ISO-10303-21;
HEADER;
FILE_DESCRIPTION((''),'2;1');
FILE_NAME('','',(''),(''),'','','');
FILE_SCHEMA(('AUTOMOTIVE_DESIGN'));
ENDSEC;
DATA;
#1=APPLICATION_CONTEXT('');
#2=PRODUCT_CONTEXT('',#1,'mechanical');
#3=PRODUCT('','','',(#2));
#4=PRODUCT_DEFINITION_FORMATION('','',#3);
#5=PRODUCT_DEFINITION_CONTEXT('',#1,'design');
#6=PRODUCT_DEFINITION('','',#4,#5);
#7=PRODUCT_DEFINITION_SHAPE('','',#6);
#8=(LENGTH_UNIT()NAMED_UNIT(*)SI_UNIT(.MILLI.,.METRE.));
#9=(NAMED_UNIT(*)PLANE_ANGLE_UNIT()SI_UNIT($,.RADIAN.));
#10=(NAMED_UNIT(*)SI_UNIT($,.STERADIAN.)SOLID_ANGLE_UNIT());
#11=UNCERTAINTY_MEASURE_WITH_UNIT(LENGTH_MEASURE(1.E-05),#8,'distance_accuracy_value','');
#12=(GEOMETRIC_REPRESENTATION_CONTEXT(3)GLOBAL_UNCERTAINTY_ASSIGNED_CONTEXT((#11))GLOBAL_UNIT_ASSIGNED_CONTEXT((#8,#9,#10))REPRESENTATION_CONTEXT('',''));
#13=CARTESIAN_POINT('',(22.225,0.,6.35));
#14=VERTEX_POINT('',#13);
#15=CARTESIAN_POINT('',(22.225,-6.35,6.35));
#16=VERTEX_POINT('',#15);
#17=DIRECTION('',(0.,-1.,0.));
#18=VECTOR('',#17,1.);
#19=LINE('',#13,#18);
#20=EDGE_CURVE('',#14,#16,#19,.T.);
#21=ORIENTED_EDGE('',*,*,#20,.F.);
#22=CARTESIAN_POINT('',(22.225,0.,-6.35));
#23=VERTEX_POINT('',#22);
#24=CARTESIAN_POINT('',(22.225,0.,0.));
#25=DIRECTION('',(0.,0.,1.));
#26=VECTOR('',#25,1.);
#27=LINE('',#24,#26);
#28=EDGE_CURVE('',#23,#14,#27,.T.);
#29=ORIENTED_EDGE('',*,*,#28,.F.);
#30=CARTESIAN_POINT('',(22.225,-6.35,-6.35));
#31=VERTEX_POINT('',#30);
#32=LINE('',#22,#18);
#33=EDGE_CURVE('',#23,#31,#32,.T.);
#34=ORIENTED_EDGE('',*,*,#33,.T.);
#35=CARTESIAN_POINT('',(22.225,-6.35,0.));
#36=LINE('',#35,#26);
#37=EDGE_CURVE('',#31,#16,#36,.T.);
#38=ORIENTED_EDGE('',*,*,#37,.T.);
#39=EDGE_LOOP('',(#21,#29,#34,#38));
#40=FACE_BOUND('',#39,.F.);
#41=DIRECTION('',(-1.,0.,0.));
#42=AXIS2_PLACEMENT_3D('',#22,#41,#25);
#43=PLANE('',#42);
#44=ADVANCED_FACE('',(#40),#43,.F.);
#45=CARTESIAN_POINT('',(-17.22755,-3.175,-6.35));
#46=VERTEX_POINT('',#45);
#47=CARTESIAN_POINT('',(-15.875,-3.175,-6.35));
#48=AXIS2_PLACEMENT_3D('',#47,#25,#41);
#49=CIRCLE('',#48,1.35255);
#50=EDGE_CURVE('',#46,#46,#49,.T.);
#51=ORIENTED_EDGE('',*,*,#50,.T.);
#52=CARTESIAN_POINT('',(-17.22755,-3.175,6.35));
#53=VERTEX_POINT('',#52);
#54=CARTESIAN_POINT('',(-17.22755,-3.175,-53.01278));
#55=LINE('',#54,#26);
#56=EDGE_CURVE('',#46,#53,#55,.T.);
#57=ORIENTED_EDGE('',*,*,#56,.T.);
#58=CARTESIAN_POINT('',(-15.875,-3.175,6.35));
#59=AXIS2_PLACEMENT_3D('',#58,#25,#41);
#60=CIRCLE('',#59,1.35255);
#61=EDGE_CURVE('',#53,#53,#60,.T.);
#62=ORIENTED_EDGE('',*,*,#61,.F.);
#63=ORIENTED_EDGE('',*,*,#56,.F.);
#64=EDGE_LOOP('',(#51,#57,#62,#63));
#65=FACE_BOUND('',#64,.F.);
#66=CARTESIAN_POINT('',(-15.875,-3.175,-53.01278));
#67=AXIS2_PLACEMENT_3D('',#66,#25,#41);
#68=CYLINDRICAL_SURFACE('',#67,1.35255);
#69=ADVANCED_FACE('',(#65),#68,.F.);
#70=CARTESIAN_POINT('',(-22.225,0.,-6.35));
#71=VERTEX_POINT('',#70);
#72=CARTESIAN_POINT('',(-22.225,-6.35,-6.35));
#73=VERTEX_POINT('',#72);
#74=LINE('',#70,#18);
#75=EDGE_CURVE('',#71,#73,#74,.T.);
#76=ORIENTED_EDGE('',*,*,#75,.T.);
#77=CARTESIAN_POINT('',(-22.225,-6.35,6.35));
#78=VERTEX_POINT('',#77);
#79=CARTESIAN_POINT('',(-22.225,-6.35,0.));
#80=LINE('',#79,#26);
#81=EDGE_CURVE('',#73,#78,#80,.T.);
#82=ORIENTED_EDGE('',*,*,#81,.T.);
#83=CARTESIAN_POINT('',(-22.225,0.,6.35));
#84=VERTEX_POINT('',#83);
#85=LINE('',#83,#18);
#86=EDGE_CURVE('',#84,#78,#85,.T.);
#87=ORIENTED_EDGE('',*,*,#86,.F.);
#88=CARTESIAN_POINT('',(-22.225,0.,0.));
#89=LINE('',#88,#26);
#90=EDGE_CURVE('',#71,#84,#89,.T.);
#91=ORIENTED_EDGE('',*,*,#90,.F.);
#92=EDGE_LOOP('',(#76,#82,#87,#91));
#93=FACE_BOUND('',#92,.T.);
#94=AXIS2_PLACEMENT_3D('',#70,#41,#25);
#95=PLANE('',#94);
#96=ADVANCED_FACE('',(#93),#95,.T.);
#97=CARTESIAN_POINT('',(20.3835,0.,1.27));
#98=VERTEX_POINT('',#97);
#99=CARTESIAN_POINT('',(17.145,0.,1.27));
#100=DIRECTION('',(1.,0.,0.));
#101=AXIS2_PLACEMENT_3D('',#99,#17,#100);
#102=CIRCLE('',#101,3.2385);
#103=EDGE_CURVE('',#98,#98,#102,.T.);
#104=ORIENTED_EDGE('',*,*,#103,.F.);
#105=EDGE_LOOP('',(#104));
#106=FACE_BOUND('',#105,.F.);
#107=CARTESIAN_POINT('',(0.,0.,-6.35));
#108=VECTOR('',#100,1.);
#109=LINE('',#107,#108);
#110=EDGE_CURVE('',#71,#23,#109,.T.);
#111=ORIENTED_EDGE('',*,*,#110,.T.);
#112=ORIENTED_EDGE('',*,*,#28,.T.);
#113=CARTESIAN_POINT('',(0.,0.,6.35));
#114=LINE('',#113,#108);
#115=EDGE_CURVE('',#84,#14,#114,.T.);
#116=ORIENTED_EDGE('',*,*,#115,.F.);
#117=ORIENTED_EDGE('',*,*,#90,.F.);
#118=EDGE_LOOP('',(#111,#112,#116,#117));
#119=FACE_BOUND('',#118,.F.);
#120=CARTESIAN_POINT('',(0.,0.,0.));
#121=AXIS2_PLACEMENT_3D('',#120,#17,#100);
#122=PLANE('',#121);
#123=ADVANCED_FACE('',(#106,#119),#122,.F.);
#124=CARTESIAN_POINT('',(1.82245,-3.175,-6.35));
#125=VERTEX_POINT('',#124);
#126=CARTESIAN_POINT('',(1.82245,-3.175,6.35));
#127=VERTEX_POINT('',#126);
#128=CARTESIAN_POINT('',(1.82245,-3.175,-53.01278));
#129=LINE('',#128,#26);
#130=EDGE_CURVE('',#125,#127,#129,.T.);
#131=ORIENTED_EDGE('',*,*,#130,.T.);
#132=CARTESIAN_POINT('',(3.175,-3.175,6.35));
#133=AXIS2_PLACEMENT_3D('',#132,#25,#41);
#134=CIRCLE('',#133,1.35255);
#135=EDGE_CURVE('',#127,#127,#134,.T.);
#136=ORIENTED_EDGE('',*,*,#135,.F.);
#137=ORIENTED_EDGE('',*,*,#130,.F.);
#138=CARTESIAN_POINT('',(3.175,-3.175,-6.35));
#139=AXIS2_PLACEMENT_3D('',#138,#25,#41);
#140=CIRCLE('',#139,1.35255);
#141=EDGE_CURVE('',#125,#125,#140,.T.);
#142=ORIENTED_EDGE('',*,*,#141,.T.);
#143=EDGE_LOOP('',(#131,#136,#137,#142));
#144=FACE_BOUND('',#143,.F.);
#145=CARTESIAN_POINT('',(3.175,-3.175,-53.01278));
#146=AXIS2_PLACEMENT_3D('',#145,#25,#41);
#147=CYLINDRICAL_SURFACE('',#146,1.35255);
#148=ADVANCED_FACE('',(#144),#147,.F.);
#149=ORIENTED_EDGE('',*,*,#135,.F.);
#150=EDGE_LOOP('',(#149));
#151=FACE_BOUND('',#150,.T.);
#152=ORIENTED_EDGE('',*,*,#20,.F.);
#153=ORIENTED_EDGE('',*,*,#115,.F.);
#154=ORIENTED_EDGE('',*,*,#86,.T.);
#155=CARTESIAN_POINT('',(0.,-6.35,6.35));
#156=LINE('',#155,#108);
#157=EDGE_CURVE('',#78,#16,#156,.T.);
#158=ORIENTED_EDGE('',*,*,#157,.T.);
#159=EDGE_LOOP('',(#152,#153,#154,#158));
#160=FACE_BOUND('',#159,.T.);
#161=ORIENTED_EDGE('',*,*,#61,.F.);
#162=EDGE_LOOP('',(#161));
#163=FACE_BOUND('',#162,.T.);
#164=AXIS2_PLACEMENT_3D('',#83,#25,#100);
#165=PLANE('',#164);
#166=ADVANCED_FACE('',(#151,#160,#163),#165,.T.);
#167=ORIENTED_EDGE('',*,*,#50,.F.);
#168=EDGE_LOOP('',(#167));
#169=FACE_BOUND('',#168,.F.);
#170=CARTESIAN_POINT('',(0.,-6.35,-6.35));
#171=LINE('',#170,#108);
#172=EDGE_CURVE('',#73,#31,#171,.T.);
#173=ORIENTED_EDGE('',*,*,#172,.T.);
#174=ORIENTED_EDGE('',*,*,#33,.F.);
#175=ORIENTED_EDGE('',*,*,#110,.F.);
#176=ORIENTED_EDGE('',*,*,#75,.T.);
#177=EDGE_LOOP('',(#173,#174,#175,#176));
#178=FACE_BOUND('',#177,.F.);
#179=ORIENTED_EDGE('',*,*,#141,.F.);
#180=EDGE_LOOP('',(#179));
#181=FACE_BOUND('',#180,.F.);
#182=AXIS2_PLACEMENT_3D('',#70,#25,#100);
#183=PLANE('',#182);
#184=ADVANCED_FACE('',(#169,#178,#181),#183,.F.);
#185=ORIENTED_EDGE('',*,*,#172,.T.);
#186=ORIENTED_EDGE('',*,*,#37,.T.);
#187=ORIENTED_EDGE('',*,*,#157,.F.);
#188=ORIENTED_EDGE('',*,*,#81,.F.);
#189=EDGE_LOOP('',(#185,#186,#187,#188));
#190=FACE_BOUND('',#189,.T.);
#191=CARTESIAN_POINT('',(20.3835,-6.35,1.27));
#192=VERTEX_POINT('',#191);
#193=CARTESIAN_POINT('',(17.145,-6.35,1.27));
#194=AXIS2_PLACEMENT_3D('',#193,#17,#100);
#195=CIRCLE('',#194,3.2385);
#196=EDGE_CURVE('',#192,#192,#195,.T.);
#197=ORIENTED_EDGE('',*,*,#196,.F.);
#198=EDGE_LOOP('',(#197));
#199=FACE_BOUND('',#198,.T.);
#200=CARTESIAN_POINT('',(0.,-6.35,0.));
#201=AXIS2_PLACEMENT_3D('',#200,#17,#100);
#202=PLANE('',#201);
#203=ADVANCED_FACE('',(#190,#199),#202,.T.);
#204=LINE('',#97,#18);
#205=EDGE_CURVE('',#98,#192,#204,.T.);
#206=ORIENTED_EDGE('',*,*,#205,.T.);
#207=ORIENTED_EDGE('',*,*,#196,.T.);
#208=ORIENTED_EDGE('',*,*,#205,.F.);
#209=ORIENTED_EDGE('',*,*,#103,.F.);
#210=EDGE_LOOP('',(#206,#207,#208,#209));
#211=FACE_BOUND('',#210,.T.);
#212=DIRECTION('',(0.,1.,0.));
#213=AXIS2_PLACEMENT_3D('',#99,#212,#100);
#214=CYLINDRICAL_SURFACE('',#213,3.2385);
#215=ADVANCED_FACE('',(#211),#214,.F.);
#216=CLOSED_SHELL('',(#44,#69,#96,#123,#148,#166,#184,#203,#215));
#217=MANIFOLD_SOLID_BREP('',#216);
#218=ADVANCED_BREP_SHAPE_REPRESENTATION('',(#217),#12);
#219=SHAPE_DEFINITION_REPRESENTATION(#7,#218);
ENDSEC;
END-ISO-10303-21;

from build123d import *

# Parameters (mm, degrees)
F0_W     = 44.45
F0_H     = 12.7
F0_R     = 3.2385
F1_DEPTH = 6.35
F3_D     = 2.7051


with BuildPart() as f1:
    # F0 (on Front) → F1 (new body)
    with BuildSketch(Plane.XZ):
        Rectangle(F0_W, F0_H)
        with Locations((17.145, 1.27)):
            Circle(F0_R, mode=Mode.SUBTRACT)
    extrude(amount=F1_DEPTH)

    # F3 (through all)
    with Locations(Plane(origin=(0, 0, -6.35), x_dir=(1, 0, 0), z_dir=(0, 0, -1))):
        with Locations((-15.875, 3.175), (3.175, 3.175)):
            Hole(F3_D / 2)


solid = f1.part
